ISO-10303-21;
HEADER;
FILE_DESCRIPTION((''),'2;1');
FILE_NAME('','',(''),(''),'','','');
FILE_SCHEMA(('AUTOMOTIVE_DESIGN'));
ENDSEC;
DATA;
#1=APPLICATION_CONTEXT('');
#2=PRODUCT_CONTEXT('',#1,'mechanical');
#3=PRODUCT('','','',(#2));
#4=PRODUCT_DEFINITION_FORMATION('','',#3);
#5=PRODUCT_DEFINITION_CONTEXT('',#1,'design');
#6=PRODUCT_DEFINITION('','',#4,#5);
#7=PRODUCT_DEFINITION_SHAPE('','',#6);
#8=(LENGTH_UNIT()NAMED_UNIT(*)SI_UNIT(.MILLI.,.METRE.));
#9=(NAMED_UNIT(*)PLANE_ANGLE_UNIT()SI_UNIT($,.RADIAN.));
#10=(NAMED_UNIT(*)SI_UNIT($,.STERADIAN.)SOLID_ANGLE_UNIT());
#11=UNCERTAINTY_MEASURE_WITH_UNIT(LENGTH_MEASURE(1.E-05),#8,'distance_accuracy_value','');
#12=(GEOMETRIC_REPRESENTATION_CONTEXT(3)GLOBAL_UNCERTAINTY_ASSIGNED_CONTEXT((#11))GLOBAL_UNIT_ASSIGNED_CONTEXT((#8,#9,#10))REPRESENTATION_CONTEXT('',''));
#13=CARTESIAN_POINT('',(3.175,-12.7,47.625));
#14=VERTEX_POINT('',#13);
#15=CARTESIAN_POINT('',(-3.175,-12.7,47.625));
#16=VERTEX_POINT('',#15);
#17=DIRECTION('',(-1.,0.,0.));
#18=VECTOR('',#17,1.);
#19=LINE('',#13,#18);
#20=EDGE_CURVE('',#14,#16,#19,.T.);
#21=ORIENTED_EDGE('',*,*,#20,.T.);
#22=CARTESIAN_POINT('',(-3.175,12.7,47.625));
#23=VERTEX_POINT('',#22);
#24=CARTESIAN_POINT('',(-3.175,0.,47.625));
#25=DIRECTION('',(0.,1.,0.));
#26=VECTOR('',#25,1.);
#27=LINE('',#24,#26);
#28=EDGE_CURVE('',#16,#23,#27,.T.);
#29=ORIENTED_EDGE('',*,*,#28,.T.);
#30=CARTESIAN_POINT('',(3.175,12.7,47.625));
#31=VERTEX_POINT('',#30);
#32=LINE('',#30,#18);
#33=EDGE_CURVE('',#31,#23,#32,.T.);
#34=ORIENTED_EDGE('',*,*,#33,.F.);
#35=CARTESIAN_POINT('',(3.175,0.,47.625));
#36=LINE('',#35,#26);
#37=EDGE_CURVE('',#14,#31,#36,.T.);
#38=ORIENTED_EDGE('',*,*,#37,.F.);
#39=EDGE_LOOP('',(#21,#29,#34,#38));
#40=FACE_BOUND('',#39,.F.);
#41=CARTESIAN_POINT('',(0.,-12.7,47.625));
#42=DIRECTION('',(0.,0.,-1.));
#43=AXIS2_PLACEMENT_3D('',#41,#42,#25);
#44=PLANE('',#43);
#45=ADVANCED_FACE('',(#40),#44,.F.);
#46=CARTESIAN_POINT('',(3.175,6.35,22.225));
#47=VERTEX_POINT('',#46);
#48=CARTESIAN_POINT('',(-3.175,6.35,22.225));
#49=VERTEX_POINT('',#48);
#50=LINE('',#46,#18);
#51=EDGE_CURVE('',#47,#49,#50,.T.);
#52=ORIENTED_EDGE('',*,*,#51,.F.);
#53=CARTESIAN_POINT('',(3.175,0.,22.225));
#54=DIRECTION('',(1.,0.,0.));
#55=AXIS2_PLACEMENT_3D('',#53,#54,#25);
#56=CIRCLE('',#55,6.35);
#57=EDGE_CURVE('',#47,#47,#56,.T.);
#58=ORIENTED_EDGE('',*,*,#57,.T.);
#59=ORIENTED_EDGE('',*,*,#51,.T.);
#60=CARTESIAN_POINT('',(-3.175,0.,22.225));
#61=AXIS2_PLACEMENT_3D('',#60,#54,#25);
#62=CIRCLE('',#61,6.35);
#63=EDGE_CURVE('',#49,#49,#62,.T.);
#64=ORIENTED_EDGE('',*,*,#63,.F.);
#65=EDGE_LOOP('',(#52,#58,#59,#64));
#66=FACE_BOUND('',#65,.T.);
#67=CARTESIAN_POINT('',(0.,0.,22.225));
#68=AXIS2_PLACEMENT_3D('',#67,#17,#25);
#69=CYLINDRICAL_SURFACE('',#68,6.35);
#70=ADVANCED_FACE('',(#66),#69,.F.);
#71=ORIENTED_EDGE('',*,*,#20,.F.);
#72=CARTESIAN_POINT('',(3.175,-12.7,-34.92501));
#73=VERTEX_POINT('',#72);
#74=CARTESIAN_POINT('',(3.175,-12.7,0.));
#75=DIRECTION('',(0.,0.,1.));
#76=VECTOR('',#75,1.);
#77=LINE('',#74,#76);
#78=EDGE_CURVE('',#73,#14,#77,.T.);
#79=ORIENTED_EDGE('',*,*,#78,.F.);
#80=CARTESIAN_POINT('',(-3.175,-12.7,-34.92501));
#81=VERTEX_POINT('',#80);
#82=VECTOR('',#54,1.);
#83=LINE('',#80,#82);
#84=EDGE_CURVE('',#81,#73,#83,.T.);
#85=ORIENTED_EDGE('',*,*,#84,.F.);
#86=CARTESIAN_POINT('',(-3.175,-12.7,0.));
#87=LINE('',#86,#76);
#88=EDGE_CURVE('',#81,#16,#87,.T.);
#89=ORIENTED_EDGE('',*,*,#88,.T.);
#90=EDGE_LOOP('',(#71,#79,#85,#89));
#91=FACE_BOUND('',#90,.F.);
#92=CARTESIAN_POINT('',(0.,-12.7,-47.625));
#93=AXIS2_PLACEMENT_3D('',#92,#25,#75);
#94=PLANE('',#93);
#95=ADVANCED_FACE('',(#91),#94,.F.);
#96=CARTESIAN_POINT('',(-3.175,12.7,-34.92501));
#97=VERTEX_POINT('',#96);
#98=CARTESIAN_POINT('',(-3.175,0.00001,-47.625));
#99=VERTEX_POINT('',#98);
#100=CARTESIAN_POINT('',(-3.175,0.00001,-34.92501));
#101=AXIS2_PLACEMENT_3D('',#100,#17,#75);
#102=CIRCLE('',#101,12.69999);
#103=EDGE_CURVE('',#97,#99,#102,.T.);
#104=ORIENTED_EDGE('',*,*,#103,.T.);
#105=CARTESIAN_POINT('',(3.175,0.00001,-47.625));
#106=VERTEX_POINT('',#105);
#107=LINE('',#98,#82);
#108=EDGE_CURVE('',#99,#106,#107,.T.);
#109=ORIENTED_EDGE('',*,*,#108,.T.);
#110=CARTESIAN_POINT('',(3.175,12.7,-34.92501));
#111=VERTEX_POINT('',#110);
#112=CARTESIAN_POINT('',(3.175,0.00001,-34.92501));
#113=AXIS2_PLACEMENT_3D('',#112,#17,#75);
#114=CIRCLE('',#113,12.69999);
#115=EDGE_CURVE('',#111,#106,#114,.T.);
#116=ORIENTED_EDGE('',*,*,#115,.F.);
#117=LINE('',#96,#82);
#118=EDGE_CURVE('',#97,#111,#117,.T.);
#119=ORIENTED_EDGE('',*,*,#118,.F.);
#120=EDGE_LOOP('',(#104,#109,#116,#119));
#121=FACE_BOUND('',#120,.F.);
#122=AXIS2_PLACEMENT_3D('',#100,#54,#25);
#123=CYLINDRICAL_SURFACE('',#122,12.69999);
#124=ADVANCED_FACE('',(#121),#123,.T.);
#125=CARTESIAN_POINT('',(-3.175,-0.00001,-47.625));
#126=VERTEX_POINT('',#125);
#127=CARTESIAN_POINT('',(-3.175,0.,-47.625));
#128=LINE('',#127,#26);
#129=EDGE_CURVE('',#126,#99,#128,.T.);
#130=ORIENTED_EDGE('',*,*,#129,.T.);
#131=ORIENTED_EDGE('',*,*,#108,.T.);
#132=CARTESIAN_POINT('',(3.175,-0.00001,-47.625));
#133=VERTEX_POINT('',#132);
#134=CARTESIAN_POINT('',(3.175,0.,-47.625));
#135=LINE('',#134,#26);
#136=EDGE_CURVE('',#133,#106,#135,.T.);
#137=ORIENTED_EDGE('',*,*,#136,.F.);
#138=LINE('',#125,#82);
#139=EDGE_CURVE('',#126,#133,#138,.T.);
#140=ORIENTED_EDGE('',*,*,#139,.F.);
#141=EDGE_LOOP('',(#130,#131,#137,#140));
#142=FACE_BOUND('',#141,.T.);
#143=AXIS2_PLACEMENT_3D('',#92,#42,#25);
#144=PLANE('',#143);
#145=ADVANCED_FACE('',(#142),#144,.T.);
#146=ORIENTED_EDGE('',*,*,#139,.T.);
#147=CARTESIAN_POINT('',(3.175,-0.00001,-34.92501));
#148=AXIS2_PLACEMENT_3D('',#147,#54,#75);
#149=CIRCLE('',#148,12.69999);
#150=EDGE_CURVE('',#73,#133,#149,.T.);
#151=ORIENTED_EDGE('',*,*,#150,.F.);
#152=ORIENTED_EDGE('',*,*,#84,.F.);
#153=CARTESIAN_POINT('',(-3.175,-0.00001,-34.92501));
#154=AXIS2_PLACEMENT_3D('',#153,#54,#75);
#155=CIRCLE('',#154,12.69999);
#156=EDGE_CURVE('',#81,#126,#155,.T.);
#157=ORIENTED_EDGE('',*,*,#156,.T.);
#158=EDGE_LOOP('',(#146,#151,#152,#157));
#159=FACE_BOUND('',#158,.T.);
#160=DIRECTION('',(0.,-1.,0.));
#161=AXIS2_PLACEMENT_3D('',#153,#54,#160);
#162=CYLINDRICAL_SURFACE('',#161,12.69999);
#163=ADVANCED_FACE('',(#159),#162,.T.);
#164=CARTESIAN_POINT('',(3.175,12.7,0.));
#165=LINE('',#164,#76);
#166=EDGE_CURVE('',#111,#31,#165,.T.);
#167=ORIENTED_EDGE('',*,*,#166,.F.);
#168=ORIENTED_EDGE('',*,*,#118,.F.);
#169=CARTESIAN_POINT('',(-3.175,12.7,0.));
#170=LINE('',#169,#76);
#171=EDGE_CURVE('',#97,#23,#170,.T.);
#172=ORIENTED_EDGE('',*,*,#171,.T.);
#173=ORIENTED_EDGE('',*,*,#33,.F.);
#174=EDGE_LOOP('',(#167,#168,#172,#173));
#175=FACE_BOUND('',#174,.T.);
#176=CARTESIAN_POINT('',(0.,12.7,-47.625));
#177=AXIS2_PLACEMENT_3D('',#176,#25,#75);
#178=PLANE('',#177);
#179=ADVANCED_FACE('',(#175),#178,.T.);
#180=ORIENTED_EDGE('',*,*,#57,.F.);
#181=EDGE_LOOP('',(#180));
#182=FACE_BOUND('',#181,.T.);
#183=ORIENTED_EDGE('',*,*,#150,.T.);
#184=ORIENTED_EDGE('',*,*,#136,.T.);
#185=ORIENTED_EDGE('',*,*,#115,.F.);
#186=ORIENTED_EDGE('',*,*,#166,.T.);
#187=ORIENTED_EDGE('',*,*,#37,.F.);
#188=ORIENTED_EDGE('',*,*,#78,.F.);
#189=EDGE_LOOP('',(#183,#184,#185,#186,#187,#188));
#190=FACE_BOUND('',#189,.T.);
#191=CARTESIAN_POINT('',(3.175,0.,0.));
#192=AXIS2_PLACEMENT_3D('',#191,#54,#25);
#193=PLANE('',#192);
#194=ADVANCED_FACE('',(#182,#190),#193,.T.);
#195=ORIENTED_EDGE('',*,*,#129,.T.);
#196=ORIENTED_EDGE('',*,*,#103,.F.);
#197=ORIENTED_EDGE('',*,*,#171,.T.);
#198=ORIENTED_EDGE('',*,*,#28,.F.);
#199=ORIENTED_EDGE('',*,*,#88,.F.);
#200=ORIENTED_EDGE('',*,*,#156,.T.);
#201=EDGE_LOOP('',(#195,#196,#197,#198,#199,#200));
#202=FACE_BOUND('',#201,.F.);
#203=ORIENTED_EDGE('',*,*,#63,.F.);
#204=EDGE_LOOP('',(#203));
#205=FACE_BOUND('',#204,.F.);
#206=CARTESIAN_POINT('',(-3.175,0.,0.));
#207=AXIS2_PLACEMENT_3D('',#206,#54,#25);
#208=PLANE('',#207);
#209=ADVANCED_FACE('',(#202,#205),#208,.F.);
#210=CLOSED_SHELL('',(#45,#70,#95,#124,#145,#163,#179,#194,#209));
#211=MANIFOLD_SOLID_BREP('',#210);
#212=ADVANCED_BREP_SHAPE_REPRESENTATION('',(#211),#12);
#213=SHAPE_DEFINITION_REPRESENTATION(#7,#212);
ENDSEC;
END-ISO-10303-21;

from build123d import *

# Parameters (mm, degrees)
F0_W     = 25.4
F0_H     = 95.25
F0_R     = 6.35
F1_DEPTH = 3.175
F2_R     = 12.69999


# Not quite as in the source:
# - a fillet or chamfer is up to 0.001 mm smaller than in the source, because OpenCascade refuses the exact size


with BuildPart() as f1:
    # F0 (on Right) → F1 (new body, symmetric)
    with BuildSketch(Plane.YZ):
        Rectangle(F0_W, F0_H)
        with Locations((0, 22.225)):
            Circle(F0_R, mode=Mode.SUBTRACT)
    extrude(amount=F1_DEPTH, both=True)

    # F2 (radius 12.7 in the source; OpenCascade refuses exactly that, so slightly less here)
    f2_edges = [f1.edges().sort_by_distance(p)[0] for p in [
        (0, 12.7, -47.625),
        (0, -12.7, -47.625),
    ]]
    fillet(f2_edges, radius=F2_R)


solid = f1.part
